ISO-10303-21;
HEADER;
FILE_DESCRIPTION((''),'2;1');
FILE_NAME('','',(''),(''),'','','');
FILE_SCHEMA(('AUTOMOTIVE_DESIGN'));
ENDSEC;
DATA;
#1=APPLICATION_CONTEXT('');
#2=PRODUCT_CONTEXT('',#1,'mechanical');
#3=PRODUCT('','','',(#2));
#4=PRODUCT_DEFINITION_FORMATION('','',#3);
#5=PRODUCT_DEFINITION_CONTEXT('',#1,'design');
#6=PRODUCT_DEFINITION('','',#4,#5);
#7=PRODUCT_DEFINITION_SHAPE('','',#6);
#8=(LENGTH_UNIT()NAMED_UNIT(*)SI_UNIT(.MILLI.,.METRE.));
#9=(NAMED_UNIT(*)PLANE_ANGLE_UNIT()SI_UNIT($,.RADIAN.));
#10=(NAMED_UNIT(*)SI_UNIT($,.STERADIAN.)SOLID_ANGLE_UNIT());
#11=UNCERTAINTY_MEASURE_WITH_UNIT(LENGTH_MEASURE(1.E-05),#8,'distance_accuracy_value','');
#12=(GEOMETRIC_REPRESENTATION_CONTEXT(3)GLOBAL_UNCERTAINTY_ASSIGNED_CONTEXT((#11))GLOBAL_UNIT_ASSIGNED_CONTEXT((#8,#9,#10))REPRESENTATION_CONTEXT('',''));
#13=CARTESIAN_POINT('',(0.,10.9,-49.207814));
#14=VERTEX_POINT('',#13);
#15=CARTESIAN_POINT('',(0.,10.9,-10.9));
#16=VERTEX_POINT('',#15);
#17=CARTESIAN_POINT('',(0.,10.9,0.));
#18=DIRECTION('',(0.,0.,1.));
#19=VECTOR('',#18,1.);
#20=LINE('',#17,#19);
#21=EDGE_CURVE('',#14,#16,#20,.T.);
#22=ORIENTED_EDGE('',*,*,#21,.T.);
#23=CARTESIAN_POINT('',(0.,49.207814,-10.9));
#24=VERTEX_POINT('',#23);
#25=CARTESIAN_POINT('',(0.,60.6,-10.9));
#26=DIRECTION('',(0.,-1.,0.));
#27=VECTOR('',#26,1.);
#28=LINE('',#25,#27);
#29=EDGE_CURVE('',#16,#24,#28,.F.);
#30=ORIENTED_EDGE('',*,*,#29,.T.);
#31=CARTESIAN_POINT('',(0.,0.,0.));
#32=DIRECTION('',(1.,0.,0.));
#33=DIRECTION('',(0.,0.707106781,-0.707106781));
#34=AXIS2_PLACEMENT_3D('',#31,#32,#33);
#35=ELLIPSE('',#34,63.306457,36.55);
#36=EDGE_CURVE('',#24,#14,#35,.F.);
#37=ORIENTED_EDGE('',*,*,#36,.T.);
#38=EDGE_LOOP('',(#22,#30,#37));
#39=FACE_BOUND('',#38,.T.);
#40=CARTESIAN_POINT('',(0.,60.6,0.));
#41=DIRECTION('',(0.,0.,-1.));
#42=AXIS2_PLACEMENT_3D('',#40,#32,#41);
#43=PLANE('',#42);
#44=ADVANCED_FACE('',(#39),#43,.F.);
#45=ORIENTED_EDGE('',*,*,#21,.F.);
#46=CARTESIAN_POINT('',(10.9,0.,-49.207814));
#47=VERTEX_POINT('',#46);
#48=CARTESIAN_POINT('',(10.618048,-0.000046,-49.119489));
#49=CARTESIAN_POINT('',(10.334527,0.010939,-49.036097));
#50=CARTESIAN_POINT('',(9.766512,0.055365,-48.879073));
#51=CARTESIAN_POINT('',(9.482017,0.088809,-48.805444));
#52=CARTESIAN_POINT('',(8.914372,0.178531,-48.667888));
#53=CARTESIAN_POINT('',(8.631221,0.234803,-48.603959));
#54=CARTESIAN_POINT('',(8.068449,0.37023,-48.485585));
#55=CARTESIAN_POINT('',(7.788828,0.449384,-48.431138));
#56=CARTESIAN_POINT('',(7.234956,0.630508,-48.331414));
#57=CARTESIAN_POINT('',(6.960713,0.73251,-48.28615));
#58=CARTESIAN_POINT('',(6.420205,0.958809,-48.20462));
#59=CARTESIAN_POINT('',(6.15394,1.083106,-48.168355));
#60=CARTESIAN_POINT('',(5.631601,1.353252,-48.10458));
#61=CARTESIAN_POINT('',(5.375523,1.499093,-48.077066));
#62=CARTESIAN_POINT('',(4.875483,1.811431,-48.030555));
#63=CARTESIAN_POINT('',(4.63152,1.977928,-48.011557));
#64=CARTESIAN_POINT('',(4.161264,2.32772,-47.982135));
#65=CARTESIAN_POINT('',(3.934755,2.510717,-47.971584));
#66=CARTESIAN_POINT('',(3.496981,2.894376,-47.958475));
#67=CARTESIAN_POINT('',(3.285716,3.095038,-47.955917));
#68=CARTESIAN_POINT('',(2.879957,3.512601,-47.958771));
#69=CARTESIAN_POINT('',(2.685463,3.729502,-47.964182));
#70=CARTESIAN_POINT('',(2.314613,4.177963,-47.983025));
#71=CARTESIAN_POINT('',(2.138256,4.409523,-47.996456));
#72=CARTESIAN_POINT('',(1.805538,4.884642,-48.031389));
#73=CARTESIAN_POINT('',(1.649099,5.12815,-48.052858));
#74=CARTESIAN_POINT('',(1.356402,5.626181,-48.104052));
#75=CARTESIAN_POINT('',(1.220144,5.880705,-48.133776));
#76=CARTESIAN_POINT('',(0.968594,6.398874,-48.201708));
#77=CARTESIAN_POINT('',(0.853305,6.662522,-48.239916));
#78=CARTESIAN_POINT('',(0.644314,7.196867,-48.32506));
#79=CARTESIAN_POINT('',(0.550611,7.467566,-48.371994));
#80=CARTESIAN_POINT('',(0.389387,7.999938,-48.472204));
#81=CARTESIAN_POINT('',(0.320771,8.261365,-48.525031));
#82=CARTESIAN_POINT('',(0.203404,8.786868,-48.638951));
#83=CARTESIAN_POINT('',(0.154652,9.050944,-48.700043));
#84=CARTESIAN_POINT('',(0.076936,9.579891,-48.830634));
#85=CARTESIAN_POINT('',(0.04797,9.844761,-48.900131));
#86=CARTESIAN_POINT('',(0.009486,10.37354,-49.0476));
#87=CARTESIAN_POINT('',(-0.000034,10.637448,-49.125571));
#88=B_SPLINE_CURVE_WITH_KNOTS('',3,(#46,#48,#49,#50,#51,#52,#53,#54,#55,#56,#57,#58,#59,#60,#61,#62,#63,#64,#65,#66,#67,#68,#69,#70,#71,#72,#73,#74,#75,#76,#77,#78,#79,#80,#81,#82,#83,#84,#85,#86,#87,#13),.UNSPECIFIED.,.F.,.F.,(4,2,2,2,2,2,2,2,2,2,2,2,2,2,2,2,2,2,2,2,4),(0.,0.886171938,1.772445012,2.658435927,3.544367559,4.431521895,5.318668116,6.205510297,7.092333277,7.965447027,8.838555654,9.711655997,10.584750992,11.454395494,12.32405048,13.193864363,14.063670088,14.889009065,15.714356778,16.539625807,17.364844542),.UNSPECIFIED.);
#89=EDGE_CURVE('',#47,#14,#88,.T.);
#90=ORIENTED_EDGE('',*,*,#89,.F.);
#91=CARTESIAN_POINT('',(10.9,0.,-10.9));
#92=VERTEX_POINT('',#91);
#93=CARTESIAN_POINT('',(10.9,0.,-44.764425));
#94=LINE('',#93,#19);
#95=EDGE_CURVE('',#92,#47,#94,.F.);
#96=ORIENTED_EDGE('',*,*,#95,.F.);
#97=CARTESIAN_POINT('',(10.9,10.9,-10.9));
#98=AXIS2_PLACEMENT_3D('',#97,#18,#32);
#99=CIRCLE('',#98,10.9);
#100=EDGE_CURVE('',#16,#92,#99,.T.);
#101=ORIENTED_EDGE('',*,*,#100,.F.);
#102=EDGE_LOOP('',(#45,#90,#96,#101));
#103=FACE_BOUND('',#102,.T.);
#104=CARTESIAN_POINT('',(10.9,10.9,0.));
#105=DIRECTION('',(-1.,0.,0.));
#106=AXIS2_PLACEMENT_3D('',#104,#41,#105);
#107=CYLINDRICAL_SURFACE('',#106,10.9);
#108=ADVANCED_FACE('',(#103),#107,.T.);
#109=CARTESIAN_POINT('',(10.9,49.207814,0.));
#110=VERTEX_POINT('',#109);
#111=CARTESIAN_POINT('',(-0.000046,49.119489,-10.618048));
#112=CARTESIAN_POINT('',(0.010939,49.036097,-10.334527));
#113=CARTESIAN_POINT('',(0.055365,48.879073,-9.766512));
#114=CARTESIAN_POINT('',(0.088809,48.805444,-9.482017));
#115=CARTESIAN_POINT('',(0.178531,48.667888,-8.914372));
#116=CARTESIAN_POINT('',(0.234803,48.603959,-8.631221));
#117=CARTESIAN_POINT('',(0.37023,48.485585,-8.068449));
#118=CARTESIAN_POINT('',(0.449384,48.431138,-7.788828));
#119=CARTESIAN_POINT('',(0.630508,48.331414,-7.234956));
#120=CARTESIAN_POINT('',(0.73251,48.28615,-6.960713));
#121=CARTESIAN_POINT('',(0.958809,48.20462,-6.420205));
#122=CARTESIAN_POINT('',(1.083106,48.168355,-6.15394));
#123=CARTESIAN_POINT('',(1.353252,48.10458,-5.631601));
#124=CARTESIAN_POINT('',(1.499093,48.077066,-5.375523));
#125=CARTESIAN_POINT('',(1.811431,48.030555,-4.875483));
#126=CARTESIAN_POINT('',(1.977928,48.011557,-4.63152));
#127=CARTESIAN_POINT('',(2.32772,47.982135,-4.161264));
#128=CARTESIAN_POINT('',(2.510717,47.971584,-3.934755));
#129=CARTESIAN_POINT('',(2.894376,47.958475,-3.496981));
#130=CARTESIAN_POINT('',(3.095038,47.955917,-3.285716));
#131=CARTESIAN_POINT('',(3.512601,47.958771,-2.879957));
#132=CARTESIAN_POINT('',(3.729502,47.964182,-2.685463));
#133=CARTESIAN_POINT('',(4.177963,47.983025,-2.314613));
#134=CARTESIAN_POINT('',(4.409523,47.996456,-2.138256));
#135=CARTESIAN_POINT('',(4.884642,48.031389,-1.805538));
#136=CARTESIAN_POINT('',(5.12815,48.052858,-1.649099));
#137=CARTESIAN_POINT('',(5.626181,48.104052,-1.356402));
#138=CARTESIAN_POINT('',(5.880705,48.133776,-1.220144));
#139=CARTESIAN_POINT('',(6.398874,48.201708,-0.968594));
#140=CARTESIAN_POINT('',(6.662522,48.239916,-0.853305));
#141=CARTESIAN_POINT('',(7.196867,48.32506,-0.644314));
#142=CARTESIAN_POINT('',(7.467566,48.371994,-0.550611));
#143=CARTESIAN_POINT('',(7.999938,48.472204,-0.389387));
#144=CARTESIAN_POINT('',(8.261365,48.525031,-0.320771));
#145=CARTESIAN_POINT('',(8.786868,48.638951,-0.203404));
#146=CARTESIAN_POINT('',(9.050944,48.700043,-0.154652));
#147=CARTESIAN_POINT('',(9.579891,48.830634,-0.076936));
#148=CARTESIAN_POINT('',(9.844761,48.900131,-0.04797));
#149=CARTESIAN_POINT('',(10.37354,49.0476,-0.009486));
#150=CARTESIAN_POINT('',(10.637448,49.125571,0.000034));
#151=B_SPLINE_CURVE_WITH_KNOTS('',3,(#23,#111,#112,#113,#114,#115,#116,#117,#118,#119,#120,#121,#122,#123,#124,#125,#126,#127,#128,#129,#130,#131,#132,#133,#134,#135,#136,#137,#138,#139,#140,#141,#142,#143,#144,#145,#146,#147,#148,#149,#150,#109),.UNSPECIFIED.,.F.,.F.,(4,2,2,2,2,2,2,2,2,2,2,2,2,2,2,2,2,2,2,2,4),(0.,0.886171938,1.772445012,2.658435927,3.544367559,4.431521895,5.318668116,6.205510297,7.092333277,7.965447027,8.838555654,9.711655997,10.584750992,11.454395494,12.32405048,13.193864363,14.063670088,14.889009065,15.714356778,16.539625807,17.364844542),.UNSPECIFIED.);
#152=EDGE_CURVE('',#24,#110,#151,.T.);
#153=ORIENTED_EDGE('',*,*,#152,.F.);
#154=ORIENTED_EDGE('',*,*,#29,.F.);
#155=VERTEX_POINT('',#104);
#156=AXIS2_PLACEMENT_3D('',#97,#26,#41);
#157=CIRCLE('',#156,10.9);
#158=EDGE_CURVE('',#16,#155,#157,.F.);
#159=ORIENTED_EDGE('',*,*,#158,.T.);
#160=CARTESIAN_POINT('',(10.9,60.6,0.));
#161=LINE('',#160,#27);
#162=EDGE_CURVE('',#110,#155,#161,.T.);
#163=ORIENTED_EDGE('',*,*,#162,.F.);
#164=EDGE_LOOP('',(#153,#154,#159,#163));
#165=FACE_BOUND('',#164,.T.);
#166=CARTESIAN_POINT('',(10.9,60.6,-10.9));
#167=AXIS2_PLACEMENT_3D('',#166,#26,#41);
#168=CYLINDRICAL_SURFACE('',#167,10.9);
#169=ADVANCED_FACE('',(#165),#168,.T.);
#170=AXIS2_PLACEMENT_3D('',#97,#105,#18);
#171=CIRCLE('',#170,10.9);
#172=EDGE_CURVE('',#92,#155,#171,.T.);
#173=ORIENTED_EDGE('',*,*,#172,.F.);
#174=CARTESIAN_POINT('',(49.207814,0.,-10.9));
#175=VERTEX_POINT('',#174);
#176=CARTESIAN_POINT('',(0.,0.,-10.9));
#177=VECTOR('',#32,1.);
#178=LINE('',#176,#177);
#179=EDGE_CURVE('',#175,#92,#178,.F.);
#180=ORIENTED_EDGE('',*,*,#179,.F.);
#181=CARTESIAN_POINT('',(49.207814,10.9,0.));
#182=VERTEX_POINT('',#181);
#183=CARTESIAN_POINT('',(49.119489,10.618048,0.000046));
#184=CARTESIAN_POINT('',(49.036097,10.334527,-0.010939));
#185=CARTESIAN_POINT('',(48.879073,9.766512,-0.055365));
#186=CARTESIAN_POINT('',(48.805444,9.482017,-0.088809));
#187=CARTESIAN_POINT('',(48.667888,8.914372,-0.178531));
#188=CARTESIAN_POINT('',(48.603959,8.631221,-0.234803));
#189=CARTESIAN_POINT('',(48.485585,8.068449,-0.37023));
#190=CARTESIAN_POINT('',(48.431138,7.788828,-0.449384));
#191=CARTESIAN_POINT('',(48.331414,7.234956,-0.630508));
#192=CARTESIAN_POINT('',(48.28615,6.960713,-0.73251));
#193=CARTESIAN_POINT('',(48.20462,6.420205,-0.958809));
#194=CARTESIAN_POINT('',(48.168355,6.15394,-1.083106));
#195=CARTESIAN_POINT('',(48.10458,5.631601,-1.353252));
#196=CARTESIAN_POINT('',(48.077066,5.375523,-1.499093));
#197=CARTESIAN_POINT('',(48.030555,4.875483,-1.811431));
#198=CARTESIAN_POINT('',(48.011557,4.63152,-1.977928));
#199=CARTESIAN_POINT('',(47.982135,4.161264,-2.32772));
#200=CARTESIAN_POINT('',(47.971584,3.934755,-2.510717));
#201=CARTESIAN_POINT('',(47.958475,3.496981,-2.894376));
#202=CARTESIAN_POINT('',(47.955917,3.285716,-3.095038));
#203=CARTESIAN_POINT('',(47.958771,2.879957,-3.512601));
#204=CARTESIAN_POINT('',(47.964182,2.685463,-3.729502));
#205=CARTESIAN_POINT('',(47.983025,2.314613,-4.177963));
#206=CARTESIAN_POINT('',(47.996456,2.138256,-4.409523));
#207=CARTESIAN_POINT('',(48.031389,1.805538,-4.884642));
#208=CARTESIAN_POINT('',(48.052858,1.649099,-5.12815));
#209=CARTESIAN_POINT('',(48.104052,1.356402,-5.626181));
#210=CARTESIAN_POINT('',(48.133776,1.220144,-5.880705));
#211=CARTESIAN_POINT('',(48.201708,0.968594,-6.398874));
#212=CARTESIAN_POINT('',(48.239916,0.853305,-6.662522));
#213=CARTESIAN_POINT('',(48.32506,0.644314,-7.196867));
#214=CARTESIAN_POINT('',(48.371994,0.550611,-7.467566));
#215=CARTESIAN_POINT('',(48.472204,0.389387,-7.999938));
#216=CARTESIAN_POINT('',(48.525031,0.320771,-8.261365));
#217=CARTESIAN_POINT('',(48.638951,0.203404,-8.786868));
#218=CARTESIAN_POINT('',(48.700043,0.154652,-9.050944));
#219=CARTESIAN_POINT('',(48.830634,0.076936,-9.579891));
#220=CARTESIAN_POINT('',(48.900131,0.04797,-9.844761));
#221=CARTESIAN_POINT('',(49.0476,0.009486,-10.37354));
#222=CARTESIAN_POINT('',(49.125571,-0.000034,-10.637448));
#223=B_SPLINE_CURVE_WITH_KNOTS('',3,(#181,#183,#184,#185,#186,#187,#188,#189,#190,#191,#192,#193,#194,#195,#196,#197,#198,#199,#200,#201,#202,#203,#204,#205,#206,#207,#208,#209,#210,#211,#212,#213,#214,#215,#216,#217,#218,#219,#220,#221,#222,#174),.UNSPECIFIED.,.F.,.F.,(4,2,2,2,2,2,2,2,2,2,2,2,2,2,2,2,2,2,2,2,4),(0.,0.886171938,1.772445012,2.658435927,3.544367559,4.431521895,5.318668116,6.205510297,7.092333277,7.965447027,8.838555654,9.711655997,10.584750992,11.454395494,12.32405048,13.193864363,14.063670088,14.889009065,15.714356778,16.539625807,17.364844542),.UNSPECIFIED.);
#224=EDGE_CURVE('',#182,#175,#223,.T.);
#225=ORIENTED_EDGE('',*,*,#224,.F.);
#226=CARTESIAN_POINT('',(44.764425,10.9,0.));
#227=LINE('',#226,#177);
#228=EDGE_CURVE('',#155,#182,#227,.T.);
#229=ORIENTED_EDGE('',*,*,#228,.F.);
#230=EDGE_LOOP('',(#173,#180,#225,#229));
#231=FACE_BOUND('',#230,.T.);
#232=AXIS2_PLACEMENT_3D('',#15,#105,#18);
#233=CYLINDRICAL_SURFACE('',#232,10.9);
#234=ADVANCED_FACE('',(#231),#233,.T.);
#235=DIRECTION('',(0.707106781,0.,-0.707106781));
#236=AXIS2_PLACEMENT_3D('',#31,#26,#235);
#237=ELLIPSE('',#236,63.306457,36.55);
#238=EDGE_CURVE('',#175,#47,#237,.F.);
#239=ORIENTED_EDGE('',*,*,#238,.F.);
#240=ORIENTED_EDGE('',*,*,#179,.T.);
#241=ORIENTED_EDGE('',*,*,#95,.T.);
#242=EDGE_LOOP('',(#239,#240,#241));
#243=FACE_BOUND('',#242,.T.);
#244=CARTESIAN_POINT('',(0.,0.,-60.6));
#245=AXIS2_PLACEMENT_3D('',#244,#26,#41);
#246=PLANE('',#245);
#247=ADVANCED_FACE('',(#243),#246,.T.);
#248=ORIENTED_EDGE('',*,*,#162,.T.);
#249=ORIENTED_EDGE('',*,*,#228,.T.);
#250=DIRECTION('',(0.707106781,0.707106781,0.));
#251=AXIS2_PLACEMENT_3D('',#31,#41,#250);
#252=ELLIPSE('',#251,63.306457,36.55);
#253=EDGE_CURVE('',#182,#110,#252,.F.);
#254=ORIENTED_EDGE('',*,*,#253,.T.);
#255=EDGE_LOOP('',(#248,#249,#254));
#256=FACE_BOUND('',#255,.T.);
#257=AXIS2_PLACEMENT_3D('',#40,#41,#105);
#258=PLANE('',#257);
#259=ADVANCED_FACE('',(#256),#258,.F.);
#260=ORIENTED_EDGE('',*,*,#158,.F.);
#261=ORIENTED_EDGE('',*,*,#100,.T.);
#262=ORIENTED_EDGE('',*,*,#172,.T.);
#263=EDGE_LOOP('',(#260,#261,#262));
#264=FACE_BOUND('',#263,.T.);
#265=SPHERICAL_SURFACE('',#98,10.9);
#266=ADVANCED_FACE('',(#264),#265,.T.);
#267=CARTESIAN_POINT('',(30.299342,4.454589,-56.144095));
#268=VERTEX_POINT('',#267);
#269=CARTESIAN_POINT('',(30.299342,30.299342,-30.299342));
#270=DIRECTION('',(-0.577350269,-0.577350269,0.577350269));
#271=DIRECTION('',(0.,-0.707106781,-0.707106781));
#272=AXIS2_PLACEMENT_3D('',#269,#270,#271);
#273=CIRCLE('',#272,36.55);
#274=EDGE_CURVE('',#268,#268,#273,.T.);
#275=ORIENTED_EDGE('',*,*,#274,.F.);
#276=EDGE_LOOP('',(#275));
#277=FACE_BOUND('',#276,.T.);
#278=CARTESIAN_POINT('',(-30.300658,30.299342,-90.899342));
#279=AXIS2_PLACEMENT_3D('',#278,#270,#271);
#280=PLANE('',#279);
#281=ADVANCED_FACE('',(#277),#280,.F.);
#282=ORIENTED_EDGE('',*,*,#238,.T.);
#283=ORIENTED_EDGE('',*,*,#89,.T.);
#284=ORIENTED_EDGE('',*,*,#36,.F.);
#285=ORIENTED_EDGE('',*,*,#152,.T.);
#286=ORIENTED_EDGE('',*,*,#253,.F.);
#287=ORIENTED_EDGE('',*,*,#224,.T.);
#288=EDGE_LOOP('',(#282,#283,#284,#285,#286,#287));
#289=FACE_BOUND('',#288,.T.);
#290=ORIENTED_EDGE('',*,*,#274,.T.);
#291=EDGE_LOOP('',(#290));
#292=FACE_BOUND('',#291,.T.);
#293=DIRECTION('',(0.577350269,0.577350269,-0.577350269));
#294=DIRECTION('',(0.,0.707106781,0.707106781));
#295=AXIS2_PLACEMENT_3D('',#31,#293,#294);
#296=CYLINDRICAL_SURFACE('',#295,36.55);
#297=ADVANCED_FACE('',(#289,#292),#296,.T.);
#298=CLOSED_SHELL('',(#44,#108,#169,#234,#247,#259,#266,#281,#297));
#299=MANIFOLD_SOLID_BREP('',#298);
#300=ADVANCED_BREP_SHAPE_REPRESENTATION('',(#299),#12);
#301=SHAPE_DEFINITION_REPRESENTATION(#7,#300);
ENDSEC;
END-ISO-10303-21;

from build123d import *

# Parameters (mm, degrees)
SKETCH1_W          = 60.6
SKETCH1_H          = 60.6
EXTRUDE1_DEPTH     = 60.6
CUT_EXTRUDE2_DEPTH = 53.482278939
SKETCH3_R          = 36.55
CUT_EXTRUDE1_DEPTH = 53.482278939
FILLET1_R          = 10.9


with BuildPart() as part:
    # Sketch1 → Extrude1 (new body)
    with BuildSketch(Plane(origin=(0, 0, 0), x_dir=(1, 0, 0), z_dir=(0, 1, 0))):
        with Locations((30.3, 30.3)):
            Rectangle(SKETCH1_W, SKETCH1_H)
    extrude(amount=EXTRUDE1_DEPTH)

    # Sketch4 → Cut-Extrude2 (cut, through all)
    with BuildSketch(Plane(origin=(30.299342127, 30.299342127, -30.299342127), x_dir=(0.8164965809277261, -0.4082482904638631, 0.4082482904638628), z_dir=(-0.5773502691896256, -0.577350269189626, 0.5773502691896256))):
        Polygon((-49.479692804, 0), (-24.739846402, -42.85067094), (24.739846402, -42.85067094), (49.479692804, 0), (24.739846402, 42.85067094), (-24.739846402, 42.85067094), align=None)
    extrude(amount=-CUT_EXTRUDE2_DEPTH, mode=Mode.SUBTRACT)

    # Sketch3 → Cut-Extrude1 (cut, through all)
    with BuildSketch(Plane(origin=(30.299342127, 30.299342127, -30.299342127), x_dir=(0.8164965809277261, -0.4082482904638631, 0.4082482904638628), z_dir=(-0.5773502691896256, -0.577350269189626, 0.5773502691896256))):
        Polygon((-37.108963877, 21.426731029), (-24.739846402, 42.85067094), (-0.001611453, 42.85067094), (37.11057533, 21.423939911), (49.479692804, 0), (37.11057533, -21.423939911), (-0.001611453, -42.85067094), (-24.739846402, -42.85067094), (-37.108963877, -21.426731029), align=None)
        with Locations(Location((0, 0, 0), (0, 0, 120))):
            Circle(SKETCH3_R, mode=Mode.SUBTRACT)
    extrude(amount=CUT_EXTRUDE1_DEPTH, mode=Mode.SUBTRACT)

    # Fillet1
    # the kernel refuses this fillet: 10.9 mm, written as the material it takes off along each edge
    with BuildSketch(Plane(origin=(10.9, 10.9, -10.9), x_dir=(0, -1, 0), z_dir=(0, 0, 1))) as fillet1_piece_1_section:
        Polygon((0, 0), (FILLET1_R, 0), (FILLET1_R, -FILLET1_R), (0, -FILLET1_R), align=None)
    fillet1_piece_1 = extrude(amount=FILLET1_R, mode=Mode.PRIVATE)
    fillet1_piece_1 = fillet1_piece_1 - Plane(origin=(10.9, 10.9, -10.9), x_dir=(0.7071067811865475, 0.7071067811865475, 0), z_dir=(0, 0, 1)) * Sphere(FILLET1_R, mode=Mode.PRIVATE)
    add(fillet1_piece_1, mode=Mode.SUBTRACT)
    with BuildSketch(Plane(origin=(0, 0, -72.014425049), x_dir=(1, 0, 0), z_dir=(0, 0, 1)), Plane(origin=(0, 10.9, 0), x_dir=(1, 0, 0), z_dir=(0, 1, 0))) as fillet1_piece_2:
        with BuildLine():
            CenterArc((FILLET1_R, FILLET1_R), FILLET1_R, 180, 90)
            Line((0, FILLET1_R), (0, 0))
            Line((0, 0), (FILLET1_R, 0))
        make_face()
    extrude(amount=61.114425049, mode=Mode.SUBTRACT)
    with BuildSketch(Plane(origin=(10.9, 0, 0), x_dir=(0, 1, 0), z_dir=(1, 0, 0))) as fillet1_piece_3:
        with BuildLine():
            CenterArc((FILLET1_R, -FILLET1_R), FILLET1_R, 90, 90)
            Line((0, -FILLET1_R), (0, 0))
            Line((0, 0), (FILLET1_R, 0))
        make_face()
    extrude(amount=61.114425049, mode=Mode.SUBTRACT)


solid = part.part
